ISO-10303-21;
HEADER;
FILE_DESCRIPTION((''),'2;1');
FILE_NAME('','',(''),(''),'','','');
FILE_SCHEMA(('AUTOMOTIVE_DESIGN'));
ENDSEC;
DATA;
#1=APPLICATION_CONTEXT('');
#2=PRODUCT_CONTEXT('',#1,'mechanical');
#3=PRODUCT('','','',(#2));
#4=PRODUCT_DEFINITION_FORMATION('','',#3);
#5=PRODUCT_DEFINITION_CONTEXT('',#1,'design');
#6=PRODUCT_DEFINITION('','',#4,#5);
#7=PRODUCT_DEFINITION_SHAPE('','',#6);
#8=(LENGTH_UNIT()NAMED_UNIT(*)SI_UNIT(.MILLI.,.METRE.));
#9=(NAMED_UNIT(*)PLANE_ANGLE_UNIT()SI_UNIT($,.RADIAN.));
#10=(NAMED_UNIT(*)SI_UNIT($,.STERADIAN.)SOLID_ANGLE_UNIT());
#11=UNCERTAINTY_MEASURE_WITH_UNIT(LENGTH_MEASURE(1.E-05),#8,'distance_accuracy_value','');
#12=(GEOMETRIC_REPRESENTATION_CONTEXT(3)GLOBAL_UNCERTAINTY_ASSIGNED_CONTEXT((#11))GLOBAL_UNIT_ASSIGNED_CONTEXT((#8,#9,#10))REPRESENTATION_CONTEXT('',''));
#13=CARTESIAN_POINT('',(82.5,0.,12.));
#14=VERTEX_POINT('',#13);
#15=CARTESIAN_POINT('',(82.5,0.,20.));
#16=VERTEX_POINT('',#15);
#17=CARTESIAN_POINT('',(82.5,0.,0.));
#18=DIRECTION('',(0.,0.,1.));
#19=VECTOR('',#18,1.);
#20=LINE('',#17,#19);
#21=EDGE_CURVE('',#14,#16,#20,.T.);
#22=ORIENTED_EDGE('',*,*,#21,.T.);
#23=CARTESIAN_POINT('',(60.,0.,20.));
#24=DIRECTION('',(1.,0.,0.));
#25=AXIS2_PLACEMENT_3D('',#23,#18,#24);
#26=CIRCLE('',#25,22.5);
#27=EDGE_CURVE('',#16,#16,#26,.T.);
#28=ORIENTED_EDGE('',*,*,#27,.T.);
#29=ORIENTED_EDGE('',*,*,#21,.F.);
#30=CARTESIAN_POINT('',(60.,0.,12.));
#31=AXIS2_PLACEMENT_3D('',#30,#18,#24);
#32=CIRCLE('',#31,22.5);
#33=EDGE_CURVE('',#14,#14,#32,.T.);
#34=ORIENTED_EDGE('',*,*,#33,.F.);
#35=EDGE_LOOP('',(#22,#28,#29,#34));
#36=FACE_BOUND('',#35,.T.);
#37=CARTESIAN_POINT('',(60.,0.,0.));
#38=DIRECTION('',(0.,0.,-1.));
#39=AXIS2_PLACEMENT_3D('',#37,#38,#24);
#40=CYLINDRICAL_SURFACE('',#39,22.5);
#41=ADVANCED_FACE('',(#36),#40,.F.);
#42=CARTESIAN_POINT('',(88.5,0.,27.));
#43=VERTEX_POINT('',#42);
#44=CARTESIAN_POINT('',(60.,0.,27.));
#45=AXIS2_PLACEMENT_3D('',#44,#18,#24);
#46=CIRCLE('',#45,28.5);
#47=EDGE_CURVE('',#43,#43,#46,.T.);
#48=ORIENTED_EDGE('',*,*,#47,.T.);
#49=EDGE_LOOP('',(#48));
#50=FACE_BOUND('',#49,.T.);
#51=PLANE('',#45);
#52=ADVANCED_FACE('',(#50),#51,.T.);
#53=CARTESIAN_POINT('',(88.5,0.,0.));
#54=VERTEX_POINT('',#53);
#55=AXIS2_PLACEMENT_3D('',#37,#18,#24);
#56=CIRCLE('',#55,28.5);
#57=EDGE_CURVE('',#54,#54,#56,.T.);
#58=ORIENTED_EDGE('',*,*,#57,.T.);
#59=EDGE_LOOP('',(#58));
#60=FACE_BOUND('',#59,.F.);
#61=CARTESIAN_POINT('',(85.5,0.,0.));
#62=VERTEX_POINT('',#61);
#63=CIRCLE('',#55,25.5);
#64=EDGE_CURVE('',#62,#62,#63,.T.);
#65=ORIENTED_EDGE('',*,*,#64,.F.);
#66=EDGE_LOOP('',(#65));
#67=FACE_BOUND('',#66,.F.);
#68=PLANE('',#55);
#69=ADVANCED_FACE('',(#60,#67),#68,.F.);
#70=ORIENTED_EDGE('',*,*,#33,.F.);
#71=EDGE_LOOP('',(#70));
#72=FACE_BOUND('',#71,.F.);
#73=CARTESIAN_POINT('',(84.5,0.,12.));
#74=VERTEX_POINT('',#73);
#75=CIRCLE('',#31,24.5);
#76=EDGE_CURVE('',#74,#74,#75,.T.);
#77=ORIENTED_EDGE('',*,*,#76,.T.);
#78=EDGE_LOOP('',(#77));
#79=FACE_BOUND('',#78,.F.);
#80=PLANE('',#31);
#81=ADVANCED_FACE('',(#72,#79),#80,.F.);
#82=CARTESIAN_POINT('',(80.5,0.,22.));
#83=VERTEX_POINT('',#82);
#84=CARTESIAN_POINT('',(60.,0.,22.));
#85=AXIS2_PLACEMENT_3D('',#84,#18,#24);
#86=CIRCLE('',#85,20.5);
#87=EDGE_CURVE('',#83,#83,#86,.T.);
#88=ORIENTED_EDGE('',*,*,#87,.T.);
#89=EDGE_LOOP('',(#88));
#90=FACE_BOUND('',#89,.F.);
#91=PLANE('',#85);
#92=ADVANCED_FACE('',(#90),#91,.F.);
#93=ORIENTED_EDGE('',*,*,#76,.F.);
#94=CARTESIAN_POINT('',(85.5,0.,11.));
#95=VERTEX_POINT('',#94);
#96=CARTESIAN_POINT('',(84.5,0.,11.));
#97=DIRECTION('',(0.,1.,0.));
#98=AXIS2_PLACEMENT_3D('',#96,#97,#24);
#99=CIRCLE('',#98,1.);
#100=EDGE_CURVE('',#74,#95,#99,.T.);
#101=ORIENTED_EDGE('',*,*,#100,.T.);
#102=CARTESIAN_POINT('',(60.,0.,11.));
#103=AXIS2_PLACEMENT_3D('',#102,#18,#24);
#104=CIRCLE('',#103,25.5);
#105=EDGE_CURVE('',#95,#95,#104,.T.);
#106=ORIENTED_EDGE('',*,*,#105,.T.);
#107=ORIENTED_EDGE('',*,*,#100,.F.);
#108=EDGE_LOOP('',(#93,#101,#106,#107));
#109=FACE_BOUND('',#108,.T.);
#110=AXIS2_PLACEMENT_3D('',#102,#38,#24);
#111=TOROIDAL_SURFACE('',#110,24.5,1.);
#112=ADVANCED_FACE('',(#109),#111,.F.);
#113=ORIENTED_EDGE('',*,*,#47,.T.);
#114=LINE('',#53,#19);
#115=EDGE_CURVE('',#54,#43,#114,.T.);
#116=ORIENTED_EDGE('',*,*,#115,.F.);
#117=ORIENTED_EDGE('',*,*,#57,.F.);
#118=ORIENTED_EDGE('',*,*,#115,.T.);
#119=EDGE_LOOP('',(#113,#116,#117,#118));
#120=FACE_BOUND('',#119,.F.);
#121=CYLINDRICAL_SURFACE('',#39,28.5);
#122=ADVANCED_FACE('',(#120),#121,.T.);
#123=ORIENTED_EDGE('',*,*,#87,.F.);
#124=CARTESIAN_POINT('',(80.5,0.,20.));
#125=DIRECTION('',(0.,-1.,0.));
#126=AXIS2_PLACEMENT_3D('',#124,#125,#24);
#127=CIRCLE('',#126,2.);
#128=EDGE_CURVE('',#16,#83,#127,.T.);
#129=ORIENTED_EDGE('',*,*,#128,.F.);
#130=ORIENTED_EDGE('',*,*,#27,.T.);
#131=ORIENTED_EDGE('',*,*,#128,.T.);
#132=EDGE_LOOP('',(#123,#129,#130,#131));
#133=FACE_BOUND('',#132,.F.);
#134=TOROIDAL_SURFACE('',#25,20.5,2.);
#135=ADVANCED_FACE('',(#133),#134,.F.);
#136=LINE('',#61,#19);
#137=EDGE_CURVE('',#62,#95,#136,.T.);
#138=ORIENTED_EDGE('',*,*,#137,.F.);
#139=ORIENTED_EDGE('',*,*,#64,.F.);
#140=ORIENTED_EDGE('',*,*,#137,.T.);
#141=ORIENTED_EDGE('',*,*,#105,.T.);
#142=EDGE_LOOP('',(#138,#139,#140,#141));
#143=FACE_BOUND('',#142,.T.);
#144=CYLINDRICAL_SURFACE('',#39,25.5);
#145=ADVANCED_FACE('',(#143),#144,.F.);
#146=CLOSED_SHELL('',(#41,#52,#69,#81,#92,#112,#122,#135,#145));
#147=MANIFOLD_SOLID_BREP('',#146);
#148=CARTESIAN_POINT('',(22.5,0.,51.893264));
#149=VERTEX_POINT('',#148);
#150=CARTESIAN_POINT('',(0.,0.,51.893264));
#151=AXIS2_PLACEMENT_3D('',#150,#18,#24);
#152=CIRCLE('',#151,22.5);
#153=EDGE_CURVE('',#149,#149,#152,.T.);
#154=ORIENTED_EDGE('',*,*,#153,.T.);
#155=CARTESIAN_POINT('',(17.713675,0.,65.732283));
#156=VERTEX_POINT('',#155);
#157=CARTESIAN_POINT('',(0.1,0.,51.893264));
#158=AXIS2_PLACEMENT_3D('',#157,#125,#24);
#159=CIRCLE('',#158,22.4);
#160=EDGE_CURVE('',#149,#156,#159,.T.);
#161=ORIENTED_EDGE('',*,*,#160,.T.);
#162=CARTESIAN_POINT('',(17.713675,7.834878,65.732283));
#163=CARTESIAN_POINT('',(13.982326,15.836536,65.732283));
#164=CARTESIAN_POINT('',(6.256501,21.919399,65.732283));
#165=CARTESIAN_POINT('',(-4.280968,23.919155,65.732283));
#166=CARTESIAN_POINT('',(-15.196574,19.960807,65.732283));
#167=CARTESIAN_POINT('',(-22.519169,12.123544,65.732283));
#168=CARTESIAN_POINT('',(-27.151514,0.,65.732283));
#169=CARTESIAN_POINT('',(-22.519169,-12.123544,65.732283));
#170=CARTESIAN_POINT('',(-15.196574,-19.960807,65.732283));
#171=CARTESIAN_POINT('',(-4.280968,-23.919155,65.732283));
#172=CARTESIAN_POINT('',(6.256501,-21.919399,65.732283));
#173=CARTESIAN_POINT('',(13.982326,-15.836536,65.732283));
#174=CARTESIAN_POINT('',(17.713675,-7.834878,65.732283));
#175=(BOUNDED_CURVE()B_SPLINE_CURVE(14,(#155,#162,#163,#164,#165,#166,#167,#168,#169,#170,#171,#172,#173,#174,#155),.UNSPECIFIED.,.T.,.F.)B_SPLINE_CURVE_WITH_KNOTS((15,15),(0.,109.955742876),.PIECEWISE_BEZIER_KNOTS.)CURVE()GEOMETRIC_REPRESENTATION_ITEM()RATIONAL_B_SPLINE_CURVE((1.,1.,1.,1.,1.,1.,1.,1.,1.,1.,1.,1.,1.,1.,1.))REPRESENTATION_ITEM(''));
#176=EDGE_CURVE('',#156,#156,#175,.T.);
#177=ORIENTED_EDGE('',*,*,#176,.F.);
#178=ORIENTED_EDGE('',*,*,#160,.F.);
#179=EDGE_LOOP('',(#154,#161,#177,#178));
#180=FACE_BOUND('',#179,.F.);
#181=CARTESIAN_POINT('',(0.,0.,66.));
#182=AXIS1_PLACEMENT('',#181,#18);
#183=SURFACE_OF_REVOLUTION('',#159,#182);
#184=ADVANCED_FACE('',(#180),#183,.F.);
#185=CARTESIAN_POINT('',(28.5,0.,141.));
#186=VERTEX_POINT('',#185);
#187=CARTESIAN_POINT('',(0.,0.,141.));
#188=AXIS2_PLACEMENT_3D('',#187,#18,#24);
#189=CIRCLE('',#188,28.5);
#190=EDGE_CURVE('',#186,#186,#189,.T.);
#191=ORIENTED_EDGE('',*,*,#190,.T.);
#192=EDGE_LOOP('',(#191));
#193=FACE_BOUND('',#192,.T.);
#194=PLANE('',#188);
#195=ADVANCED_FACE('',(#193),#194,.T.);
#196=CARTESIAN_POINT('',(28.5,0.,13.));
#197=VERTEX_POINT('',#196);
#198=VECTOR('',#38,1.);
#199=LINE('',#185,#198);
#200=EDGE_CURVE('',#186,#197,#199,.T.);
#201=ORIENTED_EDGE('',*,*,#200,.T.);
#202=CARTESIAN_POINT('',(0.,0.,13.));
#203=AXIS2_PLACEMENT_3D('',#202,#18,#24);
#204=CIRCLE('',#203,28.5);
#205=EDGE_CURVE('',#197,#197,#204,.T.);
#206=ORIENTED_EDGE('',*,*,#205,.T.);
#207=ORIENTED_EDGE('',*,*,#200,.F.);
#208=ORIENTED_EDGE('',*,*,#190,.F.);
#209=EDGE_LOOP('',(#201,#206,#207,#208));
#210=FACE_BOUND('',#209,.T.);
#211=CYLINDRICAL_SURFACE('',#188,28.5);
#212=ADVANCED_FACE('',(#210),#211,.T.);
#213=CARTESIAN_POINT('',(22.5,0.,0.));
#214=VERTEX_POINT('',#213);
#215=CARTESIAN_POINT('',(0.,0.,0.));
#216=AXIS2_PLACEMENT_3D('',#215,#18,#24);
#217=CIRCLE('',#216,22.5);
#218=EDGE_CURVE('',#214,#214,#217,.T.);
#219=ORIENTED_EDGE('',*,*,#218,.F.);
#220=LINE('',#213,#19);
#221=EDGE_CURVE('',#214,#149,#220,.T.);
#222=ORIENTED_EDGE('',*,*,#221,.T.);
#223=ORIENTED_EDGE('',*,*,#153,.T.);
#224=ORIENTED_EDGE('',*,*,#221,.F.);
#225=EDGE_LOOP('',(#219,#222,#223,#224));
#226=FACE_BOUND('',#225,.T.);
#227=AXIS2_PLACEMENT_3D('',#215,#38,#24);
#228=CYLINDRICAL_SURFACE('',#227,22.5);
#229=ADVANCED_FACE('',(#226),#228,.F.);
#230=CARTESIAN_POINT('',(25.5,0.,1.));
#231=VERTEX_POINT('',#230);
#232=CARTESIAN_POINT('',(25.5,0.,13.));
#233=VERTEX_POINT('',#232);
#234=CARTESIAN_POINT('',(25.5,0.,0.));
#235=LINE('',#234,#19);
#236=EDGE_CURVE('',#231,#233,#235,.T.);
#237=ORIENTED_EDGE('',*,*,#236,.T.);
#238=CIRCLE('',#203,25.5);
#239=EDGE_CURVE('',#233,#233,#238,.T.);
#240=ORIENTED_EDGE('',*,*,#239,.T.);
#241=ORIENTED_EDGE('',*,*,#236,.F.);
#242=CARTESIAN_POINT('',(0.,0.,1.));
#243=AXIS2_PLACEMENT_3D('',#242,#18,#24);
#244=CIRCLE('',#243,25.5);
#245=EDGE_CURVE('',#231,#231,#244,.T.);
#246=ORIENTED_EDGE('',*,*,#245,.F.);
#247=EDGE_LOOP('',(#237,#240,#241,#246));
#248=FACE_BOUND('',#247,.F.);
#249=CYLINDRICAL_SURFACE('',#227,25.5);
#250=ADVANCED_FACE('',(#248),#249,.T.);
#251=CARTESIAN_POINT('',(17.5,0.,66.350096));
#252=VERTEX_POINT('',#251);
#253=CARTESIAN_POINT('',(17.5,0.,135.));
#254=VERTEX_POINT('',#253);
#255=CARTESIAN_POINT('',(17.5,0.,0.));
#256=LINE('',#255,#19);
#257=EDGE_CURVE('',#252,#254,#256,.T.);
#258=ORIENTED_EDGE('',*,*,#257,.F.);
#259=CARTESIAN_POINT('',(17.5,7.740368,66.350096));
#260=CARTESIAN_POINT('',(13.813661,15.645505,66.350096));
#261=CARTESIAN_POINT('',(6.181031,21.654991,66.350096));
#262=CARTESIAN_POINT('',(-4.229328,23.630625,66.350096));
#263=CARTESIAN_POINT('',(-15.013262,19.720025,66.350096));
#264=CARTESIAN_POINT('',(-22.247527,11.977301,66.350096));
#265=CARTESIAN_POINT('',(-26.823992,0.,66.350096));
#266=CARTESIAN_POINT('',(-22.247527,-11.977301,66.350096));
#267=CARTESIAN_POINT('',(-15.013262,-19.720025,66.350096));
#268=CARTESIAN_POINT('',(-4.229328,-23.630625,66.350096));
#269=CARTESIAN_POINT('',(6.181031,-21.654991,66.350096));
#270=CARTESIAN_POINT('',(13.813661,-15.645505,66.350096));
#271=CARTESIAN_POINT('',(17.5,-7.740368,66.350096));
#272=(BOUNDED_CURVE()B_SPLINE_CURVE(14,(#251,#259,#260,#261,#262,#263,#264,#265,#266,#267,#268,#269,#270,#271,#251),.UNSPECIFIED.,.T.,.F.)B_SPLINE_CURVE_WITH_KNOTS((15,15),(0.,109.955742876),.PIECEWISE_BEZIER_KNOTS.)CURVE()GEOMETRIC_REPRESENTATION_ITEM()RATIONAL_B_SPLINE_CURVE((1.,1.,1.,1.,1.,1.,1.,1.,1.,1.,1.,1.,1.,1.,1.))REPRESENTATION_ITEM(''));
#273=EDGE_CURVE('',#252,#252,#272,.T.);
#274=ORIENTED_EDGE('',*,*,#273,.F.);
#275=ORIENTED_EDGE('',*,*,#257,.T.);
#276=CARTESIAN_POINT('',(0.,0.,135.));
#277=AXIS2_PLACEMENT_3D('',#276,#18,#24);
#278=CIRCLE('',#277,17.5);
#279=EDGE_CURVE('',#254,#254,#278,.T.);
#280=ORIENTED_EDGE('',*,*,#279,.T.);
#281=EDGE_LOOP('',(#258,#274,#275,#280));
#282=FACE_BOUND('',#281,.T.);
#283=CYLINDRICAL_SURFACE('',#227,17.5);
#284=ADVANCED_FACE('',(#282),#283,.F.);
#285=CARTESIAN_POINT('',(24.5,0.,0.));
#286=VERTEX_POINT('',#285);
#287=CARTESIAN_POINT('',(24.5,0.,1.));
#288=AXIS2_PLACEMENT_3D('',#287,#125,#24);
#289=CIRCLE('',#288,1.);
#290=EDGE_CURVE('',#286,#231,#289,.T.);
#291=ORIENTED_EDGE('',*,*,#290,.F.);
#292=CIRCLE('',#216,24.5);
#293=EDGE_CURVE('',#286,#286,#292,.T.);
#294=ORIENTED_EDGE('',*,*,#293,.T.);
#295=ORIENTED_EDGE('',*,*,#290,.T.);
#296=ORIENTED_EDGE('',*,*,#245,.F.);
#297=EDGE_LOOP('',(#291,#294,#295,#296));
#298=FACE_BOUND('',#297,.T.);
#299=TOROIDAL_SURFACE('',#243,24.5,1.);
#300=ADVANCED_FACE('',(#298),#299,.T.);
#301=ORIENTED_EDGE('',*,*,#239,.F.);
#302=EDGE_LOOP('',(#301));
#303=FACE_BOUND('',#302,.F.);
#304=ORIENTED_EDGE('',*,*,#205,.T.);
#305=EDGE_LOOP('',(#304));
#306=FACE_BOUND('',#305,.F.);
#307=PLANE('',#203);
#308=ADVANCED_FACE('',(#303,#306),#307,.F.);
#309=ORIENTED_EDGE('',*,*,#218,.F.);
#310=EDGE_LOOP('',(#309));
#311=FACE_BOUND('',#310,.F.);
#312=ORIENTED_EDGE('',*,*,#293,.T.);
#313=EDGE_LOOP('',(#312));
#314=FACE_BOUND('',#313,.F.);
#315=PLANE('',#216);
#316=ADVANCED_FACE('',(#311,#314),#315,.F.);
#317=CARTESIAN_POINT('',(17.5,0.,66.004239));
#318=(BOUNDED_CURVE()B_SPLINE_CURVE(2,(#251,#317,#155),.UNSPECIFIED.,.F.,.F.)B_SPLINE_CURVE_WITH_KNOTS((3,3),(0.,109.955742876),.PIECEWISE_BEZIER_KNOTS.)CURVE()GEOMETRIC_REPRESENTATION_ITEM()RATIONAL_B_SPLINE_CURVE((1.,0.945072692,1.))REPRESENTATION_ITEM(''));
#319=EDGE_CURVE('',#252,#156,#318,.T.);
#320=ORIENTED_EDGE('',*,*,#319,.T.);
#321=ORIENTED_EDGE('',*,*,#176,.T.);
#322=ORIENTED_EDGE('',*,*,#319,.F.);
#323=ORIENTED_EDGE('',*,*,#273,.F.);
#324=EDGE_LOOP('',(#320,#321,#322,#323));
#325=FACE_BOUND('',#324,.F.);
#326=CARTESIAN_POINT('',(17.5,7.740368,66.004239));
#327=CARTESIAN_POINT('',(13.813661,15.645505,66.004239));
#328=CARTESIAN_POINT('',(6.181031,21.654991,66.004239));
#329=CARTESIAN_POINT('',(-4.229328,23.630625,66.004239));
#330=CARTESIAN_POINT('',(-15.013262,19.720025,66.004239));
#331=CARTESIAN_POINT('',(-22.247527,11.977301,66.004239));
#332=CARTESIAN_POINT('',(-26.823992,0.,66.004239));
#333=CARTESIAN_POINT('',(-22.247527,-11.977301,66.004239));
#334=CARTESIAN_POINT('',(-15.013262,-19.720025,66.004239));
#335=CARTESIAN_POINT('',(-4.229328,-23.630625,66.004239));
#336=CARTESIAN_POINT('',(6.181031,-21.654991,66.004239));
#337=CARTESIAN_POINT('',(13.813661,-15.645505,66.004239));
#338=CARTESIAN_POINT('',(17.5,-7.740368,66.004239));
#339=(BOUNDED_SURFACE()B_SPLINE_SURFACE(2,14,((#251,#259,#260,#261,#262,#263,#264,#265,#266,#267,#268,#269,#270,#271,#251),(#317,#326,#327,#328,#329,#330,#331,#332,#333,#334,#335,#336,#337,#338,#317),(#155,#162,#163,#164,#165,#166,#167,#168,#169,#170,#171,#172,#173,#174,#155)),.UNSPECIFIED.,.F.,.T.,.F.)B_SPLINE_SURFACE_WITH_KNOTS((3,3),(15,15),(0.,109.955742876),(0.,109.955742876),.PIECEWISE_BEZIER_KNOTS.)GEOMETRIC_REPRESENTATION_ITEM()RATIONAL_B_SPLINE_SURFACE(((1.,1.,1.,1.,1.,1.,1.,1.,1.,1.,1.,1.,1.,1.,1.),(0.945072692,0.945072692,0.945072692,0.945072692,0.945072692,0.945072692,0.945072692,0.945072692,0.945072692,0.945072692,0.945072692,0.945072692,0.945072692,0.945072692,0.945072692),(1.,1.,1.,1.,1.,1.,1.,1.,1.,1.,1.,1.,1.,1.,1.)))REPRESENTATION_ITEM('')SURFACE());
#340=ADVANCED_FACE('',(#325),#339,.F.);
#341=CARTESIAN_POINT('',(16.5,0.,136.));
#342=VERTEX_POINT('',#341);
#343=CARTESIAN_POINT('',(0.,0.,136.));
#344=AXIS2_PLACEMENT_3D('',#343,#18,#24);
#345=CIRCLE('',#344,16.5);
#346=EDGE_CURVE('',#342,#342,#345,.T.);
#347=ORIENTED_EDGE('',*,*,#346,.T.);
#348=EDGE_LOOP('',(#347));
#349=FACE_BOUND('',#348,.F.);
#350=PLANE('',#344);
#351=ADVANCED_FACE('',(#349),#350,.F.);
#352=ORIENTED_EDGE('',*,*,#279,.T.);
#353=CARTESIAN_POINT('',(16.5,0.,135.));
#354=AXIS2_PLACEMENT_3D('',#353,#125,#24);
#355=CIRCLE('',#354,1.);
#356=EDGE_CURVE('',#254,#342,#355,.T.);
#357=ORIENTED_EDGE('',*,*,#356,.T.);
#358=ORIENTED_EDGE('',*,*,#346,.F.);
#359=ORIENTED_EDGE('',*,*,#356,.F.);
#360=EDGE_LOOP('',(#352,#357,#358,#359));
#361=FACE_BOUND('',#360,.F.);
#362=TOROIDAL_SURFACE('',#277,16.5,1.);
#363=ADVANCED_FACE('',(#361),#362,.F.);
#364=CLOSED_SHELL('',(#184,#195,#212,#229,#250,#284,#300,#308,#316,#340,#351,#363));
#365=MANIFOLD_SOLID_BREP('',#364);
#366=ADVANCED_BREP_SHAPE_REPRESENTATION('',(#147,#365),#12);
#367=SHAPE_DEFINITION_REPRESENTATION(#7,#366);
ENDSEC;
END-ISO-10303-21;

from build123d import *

# Parameters (mm, degrees)
F0_R      = 25.5
F0_R_2    = 22.5
F0_R_3    = 17.5
F1_DEPTH  = 141
F2_DEPTH  = 136
F3_DEPTH  = 66
F5_R      = 1
F6_R      = 1
F7_R      = 1
F8_R      = 28.5
F8_R_2    = 25.5
F8_R_3    = 22.5
F9_DEPTH  = 27
F10_DEPTH = 22
F11_DEPTH = 12
F12_R     = 2
F13_R     = 1
F14_R     = 28.5
F14_R_2   = 25.5
F15_DEPTH = 128


# Not quite as in the source:
# - a fillet or chamfer that OpenCascade refuses, or shapes differently, is made with other operations: its cross-section is extruded or revolved along the edge and cut away or added


with BuildPart() as f1:
    # F0 (on Top) → F1 (new body)
    with BuildSketch(Plane.XY):
        Circle(F0_R)
        Circle(F0_R_2, mode=Mode.SUBTRACT)
        Circle(F0_R_2)
        Circle(F0_R_3, mode=Mode.SUBTRACT)
        Circle(F0_R_3)
    extrude(amount=F1_DEPTH)

    # F0 (on Top) → F2 (cut)
    with BuildSketch(Plane.XY):
        Circle(F0_R_3)
    extrude(amount=F2_DEPTH, mode=Mode.SUBTRACT)

    # F0 (on Top) → F3 (cut)
    with BuildSketch(Plane.XY):
        Circle(F0_R_2)
        Circle(F0_R_3, mode=Mode.SUBTRACT)
    extrude(amount=F3_DEPTH, mode=Mode.SUBTRACT)

    # F4: fillet of radius 22.4 on 1 edges, made by hand

    # F4_s1 → F4_t2 (revolve)
    with BuildSketch(Plane.XZ):
        with BuildLine():
            ThreePointArc((22.5, 51.8932640203), (21.2130291526, 59.3765787939), (17.5, 66))
            Line((17.5, 66), (22.5, 66))
            Line((22.5, 66), (22.5, 51.8932640203))
        make_face()
    revolve(axis=Axis((0, 0, 66), (0, 0, 1)))

    # F5
    f5_edges = [f1.edges().sort_by_distance(p)[0] for p in [
        (-17.5, 0, 136),
    ]]
    fillet(f5_edges, radius=F5_R)

    # F6
    f6_edges = [f1.edges().sort_by_distance(p)[0] for p in [
        (-17.5, 0, 66),
    ]]
    fillet(f6_edges, radius=F6_R)

    # F7
    f7_edges = [f1.edges().sort_by_distance(p)[0] for p in [
        (-25.5, 0, 0),
    ]]
    fillet(f7_edges, radius=F7_R)

    # F14 (on face) → F15 (join)
    with BuildSketch(Plane.XY.offset(141)):
        Circle(F14_R)
        Circle(F14_R_2, mode=Mode.SUBTRACT)
    extrude(amount=-F15_DEPTH)


with BuildPart() as f9:
    # F8 (on Top) → F9 (new body)
    with BuildSketch(Plane.XY):
        with Locations((60, 0)):
            Circle(F8_R)
        with Locations((60, 0)):
            Circle(F8_R_2, mode=Mode.SUBTRACT)
        with Locations((60, 0)):
            Circle(F8_R_2)
        with Locations((60, 0)):
            Circle(F8_R_3, mode=Mode.SUBTRACT)
        with Locations((60, 0)):
            Circle(F8_R_3)
    extrude(amount=F9_DEPTH)

    # F8 (on Top) → F10 (cut)
    with BuildSketch(Plane.XY):
        with Locations((60, 0)):
            Circle(F8_R_3)
    extrude(amount=F10_DEPTH, mode=Mode.SUBTRACT)

    # F8 (on Top) → F11 (cut)
    with BuildSketch(Plane.XY):
        with Locations((60, 0)):
            Circle(F8_R_2)
        with Locations((60, 0)):
            Circle(F8_R_3, mode=Mode.SUBTRACT)
    extrude(amount=F11_DEPTH, mode=Mode.SUBTRACT)

    # F12
    f12_edges = [f9.edges().sort_by_distance(p)[0] for p in [
        (37.5, 0, 22),
    ]]
    fillet(f12_edges, radius=F12_R)

    # F13
    f13_edges = [f9.edges().sort_by_distance(p)[0] for p in [
        (34.5, 0, 12),
    ]]
    fillet(f13_edges, radius=F13_R)


solid = Compound([f1.part, f9.part])
